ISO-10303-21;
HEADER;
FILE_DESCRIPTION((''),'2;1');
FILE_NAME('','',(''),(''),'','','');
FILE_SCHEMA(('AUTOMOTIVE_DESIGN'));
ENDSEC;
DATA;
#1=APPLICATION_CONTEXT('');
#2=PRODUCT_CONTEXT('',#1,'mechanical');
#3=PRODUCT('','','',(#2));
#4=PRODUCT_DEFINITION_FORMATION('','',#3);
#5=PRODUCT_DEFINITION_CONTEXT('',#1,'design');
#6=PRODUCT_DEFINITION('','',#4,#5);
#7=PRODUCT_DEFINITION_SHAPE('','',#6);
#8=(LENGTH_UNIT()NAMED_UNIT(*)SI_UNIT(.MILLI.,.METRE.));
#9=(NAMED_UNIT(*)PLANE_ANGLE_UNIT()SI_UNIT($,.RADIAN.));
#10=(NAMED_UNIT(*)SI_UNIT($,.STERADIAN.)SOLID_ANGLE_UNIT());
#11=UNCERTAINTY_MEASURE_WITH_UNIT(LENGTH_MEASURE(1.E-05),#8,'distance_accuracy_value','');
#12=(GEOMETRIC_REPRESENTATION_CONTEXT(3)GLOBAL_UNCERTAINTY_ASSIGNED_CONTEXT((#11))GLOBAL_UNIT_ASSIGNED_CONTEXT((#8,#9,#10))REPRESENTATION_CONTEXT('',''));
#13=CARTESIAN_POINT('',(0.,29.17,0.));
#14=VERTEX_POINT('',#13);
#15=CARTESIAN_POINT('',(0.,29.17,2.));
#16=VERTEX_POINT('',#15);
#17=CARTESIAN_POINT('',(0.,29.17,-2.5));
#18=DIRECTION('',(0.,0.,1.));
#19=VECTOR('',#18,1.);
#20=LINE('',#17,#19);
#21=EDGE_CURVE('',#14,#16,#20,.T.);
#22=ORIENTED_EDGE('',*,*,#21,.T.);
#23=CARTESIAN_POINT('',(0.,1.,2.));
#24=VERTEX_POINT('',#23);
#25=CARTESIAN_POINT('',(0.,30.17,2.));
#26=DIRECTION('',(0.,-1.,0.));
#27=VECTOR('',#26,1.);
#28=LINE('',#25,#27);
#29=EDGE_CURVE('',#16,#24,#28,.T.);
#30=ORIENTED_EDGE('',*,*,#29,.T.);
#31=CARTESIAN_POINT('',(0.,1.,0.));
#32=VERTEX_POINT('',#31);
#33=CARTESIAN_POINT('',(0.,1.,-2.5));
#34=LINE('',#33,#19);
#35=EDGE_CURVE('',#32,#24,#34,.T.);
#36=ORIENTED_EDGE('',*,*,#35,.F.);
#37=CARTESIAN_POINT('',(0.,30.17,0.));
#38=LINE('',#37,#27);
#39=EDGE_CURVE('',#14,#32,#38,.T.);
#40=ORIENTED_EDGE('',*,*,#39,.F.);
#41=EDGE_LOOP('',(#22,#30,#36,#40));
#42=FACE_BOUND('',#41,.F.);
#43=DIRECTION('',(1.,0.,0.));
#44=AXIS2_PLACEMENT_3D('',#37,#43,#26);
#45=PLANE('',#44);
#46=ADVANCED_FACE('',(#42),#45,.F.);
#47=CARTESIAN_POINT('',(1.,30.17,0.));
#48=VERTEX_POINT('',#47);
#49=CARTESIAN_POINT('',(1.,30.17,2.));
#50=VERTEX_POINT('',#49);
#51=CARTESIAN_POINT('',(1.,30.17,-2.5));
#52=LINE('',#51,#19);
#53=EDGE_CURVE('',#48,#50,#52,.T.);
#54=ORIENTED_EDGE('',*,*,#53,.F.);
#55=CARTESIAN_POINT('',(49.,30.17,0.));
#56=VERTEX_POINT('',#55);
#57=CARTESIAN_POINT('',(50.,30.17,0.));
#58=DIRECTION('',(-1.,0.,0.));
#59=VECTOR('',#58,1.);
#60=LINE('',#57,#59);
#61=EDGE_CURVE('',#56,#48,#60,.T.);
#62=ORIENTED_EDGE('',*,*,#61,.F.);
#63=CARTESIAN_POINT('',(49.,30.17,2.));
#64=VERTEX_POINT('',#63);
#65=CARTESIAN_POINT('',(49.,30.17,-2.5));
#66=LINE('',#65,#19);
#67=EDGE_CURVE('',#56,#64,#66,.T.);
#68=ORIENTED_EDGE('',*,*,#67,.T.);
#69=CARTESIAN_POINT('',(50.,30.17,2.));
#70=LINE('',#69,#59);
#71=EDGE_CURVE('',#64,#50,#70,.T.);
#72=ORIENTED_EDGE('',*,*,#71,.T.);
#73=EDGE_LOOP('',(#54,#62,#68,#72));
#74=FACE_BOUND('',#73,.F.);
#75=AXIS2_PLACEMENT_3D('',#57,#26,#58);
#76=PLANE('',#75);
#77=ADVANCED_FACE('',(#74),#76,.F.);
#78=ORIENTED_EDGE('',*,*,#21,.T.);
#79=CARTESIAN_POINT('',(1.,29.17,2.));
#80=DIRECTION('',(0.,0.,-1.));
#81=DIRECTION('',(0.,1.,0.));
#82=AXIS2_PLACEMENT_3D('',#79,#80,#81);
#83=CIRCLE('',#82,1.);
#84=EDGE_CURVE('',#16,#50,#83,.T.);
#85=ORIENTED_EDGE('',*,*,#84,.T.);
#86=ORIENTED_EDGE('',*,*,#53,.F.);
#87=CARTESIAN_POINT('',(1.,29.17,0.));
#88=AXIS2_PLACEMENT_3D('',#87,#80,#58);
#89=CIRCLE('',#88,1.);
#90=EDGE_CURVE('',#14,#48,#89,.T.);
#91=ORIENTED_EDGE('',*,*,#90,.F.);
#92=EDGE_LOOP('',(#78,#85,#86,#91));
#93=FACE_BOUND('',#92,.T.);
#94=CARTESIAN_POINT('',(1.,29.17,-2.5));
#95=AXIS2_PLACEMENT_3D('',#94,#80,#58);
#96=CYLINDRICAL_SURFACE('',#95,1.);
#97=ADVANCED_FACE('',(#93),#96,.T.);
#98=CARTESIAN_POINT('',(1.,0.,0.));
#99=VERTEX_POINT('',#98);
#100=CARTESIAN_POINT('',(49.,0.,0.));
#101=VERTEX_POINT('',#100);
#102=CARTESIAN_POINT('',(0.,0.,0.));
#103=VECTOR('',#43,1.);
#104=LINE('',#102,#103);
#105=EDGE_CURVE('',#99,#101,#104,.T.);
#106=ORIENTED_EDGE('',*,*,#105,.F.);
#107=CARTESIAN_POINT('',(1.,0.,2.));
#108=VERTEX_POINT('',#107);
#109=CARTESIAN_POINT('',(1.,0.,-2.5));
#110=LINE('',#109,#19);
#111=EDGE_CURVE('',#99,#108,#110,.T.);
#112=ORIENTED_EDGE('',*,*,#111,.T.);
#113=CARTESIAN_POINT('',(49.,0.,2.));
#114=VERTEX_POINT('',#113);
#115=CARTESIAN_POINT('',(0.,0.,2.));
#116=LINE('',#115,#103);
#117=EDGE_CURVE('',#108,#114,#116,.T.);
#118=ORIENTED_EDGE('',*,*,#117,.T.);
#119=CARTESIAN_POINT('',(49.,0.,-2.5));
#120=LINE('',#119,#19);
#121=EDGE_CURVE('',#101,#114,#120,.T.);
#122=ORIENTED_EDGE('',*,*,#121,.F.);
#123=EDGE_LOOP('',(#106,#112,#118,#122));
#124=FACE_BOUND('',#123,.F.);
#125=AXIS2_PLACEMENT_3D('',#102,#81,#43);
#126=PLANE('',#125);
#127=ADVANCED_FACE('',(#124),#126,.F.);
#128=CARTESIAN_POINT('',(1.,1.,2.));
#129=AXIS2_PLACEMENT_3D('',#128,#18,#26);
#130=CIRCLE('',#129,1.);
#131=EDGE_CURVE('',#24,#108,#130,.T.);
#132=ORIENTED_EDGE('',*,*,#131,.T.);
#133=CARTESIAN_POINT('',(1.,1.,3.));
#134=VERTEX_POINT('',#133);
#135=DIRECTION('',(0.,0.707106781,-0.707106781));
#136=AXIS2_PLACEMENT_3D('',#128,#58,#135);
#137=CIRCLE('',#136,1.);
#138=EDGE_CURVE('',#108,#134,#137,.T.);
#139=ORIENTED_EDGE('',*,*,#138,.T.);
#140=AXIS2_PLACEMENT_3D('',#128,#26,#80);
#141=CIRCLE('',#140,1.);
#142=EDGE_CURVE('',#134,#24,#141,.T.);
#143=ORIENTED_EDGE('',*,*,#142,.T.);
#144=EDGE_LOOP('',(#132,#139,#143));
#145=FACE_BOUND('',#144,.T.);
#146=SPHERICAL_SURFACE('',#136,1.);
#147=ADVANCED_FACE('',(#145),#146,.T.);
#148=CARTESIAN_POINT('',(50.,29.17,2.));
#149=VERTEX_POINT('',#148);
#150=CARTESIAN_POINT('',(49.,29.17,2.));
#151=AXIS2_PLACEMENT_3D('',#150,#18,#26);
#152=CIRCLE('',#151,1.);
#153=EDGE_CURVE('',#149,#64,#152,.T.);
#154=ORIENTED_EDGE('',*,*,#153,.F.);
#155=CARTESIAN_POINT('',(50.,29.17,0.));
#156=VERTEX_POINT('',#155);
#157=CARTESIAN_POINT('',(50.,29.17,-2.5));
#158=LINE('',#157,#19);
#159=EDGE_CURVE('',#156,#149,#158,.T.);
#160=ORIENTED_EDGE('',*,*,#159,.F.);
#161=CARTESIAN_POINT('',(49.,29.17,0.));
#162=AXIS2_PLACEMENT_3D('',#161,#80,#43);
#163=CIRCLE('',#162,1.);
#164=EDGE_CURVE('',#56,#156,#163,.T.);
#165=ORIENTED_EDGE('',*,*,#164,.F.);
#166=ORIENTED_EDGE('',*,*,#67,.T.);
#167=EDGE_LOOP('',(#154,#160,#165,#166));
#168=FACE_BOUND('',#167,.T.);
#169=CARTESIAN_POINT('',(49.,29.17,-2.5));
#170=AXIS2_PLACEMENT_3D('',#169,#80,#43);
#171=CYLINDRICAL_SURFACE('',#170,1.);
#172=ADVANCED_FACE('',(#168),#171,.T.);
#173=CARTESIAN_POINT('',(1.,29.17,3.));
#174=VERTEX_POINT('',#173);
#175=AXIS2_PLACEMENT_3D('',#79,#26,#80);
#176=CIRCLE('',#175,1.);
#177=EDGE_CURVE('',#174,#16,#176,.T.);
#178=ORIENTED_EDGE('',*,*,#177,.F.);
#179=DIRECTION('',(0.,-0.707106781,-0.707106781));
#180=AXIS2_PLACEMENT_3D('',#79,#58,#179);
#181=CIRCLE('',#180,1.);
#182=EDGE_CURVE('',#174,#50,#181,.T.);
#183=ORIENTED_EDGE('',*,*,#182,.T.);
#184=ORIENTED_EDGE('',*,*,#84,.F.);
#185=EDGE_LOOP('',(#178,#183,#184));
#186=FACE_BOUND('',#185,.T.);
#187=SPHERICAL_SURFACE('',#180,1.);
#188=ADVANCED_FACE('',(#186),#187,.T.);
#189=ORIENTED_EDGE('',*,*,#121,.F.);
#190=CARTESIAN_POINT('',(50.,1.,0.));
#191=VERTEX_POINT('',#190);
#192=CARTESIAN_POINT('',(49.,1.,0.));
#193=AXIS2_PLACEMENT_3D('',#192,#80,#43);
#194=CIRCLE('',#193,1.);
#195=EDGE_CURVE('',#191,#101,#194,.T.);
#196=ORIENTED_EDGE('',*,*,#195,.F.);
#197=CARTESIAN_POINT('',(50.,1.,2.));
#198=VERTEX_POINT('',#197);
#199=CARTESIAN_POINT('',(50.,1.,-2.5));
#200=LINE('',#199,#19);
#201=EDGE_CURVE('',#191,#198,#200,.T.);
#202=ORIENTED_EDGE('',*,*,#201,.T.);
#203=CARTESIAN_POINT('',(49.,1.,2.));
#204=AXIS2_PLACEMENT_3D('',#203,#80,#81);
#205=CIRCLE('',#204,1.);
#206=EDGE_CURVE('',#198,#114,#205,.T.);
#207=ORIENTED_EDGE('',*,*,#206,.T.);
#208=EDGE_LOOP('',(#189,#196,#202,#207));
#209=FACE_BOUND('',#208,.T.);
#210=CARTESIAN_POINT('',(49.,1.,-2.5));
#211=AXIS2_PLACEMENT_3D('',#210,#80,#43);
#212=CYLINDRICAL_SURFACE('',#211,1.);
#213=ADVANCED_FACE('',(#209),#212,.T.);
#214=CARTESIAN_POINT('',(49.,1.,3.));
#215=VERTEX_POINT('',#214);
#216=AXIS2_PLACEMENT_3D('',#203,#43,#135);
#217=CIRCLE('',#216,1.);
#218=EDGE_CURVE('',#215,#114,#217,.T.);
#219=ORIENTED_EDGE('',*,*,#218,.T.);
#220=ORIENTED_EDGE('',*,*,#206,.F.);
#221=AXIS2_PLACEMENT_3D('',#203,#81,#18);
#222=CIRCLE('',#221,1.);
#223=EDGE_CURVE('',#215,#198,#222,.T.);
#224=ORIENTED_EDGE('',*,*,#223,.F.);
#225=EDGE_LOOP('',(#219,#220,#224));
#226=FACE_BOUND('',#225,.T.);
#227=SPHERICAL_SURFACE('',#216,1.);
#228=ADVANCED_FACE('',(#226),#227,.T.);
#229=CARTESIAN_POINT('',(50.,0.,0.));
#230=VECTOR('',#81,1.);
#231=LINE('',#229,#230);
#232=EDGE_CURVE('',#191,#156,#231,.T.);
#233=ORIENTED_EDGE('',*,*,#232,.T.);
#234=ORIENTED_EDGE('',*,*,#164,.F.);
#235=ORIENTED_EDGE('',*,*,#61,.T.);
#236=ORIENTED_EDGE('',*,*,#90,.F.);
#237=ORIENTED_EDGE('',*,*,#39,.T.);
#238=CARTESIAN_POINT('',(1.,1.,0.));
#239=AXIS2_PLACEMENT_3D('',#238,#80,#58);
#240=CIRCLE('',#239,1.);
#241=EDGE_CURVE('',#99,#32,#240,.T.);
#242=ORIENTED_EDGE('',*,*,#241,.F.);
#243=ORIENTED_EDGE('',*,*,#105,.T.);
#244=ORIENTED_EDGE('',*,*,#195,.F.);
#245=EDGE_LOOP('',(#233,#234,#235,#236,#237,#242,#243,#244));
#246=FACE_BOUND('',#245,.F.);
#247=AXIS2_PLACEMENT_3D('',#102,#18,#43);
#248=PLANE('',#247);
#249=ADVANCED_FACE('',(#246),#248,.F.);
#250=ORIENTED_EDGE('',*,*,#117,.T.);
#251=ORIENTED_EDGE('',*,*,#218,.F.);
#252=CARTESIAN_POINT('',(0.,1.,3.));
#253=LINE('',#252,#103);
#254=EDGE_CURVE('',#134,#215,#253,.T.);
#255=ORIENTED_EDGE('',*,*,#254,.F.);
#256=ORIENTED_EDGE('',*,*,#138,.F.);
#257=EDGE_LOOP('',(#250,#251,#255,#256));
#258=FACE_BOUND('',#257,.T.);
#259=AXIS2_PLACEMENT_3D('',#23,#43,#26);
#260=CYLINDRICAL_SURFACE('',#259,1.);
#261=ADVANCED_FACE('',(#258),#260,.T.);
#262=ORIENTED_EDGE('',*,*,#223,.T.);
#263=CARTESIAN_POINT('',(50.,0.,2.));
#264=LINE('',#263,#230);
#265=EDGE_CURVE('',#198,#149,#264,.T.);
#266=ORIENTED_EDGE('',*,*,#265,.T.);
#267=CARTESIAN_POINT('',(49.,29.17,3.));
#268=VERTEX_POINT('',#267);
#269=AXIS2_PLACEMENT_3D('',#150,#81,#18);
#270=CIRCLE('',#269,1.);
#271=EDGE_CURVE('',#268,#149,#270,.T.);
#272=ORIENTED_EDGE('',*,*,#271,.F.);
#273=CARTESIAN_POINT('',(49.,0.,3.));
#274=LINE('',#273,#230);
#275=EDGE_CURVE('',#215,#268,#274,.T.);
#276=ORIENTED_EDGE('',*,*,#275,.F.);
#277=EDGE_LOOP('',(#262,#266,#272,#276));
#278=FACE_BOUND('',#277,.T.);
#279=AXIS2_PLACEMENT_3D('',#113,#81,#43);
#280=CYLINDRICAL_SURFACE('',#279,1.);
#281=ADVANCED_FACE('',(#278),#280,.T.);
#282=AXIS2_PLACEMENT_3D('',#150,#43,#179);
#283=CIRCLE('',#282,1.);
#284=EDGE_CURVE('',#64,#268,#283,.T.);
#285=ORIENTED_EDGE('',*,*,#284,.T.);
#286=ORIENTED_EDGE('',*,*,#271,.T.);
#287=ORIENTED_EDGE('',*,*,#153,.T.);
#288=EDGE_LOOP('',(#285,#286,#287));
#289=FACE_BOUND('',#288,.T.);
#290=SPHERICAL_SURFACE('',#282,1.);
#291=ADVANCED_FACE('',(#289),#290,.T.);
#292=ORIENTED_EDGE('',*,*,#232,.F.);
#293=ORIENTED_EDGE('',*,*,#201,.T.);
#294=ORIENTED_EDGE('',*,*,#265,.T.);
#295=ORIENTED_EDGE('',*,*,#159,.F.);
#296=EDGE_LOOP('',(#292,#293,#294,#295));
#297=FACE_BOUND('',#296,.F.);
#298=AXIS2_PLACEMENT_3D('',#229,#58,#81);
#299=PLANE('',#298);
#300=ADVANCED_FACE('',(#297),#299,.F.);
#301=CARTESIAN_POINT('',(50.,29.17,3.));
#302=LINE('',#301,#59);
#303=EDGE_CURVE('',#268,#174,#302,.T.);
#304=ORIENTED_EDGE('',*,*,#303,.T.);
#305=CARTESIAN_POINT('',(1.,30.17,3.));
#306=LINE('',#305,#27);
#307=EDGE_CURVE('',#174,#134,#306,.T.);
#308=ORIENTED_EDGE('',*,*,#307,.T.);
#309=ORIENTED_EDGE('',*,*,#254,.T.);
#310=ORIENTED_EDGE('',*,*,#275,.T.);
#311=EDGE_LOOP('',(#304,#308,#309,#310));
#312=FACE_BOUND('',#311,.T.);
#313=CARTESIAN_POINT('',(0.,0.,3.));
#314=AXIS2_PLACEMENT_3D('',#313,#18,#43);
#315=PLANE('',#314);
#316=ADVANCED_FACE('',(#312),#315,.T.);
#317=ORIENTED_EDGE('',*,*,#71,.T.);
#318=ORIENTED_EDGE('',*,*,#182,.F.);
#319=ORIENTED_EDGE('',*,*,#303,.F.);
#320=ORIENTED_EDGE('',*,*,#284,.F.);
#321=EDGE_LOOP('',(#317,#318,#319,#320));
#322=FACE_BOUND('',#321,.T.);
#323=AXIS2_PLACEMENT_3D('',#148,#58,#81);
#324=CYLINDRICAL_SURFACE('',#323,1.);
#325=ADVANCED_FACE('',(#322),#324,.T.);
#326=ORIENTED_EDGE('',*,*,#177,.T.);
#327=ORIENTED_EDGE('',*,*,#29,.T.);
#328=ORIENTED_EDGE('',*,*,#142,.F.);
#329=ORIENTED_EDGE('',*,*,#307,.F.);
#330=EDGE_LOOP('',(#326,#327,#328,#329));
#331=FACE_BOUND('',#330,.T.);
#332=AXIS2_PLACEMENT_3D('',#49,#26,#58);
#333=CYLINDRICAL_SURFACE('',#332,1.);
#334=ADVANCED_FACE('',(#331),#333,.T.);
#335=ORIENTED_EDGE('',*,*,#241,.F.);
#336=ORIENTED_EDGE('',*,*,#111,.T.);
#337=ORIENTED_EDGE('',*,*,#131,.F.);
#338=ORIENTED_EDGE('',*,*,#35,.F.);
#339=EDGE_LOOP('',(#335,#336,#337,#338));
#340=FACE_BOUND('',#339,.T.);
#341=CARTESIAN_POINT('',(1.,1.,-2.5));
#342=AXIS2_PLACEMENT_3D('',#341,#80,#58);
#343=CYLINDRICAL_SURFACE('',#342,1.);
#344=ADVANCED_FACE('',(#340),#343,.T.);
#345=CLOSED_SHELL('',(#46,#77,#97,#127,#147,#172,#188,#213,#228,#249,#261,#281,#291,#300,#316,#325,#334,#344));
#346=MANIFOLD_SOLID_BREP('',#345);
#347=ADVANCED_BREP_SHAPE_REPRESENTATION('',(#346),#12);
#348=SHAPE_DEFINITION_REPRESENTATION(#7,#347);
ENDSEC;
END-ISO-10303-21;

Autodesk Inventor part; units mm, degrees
ref_plane "YZ Plane" through (0, 0, 0) normal (1, 0, 0) x (0, 1, 0)
ref_plane "XZ Plane" through (0, 0, 0) normal (0, 1, 0) x (-1, 0, 0)
ref_plane "XY Plane" through (0, 0, 0) normal (0, 0, 1) x (1, 0, 0)
sketch "草圖1" plane through (0, 0, 0) normal (0, 0, 1) x (1, 0, 0)
  line L0 (0, 0) -> (50, 0)
  line L1 (50, 0) -> (50, 30.17)
  line L2 (50, 30.17) -> (0, 30.17)
  line L3 (0, 30.17) -> (0, 0)
  dimension "d0" = 30.17
  dimension "d1" = 50
extrude "擠出1" add sketch "草圖1" along normal blind 3
fillet "圓角1" radius 1 4 edges at (25, 0, 3) (25, 30.17, 3) (50, 15.085, 3) (0, 15.085, 3)
fillet "圓角2" radius 1 2 edges at (0, 0, 1) (0.2929, 0.2929, 2.7071)
fillet "圓角3" radius 1 2 edges at (0.2929, 29.8771, 2.7071) (0, 30.17, 1)
fillet "圓角4" radius 1 4 edges at (49.7071, 0.2929, 2.7071) (50, 0, 1) (49.7071, 29.8771, 2.7071) (50, 30.17, 1)
properties part number "時鐘底座"
